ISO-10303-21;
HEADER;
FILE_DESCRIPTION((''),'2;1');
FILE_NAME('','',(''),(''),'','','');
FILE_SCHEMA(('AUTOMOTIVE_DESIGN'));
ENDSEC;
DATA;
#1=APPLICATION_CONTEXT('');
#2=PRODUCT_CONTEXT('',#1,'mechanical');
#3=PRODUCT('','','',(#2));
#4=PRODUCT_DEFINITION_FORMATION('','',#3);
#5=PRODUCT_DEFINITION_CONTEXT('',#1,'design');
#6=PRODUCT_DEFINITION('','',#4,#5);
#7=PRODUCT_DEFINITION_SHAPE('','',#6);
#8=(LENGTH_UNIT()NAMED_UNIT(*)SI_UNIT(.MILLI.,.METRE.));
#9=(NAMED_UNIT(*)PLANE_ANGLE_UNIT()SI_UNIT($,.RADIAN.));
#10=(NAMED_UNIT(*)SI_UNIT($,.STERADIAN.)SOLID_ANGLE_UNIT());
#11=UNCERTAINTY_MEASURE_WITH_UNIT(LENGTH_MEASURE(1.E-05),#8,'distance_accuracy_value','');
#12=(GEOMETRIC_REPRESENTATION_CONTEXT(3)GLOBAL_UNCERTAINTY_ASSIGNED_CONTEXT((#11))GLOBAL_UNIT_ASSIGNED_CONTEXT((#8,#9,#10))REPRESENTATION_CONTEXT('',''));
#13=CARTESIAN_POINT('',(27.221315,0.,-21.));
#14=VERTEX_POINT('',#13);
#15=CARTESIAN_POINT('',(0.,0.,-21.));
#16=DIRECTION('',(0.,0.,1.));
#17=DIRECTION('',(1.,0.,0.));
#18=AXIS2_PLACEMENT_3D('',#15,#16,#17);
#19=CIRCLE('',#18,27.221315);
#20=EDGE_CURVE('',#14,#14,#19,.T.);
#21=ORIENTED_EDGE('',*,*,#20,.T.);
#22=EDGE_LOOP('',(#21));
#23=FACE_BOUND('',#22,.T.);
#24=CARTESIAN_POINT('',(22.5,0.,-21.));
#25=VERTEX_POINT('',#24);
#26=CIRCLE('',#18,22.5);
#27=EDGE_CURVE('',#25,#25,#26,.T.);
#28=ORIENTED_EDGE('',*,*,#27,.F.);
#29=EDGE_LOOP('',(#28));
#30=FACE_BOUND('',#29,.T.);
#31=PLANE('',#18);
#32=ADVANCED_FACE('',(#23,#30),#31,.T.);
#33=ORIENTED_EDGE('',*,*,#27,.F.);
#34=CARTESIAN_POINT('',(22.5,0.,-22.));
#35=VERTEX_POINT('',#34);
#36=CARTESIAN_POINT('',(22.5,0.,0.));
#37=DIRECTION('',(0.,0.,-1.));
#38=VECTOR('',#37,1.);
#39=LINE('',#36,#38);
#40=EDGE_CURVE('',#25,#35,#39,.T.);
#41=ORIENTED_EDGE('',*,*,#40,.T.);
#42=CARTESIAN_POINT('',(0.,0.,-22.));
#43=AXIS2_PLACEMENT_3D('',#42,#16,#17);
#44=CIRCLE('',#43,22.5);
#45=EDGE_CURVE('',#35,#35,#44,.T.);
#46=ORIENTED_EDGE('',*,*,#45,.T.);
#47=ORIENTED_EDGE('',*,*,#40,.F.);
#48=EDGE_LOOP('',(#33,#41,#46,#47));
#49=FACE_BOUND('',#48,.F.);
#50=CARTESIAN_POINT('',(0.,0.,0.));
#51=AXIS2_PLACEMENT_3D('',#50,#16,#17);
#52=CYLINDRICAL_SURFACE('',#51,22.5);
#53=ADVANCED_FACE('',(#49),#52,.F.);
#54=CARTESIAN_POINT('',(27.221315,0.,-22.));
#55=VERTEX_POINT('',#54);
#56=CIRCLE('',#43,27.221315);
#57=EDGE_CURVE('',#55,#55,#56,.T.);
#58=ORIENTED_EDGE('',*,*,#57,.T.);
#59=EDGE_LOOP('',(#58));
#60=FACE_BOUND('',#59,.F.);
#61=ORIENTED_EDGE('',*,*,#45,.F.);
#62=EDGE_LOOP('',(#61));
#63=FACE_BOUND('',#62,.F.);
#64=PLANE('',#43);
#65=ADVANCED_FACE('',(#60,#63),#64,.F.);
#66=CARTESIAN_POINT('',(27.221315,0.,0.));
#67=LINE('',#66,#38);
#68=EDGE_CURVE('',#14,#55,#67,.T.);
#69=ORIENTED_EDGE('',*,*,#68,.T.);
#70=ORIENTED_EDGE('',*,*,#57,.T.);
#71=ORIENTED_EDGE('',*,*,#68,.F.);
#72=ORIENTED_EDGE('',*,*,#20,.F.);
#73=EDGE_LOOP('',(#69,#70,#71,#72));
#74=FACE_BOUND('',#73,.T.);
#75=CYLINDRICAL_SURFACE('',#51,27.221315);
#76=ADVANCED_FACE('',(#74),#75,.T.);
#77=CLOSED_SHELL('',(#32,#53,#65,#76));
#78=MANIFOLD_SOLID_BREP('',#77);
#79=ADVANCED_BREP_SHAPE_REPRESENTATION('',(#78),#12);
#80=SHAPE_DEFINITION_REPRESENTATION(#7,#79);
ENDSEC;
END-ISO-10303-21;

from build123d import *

# Parameters (mm, degrees)
F1_R     = 27.2213151776
F1_R_2   = 22.5
F2_DEPTH = 22
F3_DEPTH = 21


# Not quite as in the source:
# - the program builds the solid bodies; features that only make, move or delete a surface that nothing else refers to are left out


with BuildPart() as f2:
    # F1 (on Top) → F2 (new body)
    with BuildSketch(Plane.XY):
        Circle(F1_R)
        Circle(F1_R_2, mode=Mode.SUBTRACT)
    extrude(amount=-F2_DEPTH)

    # F3 (cut): a face of the model
    f3_faces = [f2.faces().sort_by_distance(p)[0] for p in [
        (-26.4513801154, 0, 0),
    ]]
    extrude(f3_faces, amount=-F3_DEPTH, mode=Mode.SUBTRACT)


solid = f2.part
